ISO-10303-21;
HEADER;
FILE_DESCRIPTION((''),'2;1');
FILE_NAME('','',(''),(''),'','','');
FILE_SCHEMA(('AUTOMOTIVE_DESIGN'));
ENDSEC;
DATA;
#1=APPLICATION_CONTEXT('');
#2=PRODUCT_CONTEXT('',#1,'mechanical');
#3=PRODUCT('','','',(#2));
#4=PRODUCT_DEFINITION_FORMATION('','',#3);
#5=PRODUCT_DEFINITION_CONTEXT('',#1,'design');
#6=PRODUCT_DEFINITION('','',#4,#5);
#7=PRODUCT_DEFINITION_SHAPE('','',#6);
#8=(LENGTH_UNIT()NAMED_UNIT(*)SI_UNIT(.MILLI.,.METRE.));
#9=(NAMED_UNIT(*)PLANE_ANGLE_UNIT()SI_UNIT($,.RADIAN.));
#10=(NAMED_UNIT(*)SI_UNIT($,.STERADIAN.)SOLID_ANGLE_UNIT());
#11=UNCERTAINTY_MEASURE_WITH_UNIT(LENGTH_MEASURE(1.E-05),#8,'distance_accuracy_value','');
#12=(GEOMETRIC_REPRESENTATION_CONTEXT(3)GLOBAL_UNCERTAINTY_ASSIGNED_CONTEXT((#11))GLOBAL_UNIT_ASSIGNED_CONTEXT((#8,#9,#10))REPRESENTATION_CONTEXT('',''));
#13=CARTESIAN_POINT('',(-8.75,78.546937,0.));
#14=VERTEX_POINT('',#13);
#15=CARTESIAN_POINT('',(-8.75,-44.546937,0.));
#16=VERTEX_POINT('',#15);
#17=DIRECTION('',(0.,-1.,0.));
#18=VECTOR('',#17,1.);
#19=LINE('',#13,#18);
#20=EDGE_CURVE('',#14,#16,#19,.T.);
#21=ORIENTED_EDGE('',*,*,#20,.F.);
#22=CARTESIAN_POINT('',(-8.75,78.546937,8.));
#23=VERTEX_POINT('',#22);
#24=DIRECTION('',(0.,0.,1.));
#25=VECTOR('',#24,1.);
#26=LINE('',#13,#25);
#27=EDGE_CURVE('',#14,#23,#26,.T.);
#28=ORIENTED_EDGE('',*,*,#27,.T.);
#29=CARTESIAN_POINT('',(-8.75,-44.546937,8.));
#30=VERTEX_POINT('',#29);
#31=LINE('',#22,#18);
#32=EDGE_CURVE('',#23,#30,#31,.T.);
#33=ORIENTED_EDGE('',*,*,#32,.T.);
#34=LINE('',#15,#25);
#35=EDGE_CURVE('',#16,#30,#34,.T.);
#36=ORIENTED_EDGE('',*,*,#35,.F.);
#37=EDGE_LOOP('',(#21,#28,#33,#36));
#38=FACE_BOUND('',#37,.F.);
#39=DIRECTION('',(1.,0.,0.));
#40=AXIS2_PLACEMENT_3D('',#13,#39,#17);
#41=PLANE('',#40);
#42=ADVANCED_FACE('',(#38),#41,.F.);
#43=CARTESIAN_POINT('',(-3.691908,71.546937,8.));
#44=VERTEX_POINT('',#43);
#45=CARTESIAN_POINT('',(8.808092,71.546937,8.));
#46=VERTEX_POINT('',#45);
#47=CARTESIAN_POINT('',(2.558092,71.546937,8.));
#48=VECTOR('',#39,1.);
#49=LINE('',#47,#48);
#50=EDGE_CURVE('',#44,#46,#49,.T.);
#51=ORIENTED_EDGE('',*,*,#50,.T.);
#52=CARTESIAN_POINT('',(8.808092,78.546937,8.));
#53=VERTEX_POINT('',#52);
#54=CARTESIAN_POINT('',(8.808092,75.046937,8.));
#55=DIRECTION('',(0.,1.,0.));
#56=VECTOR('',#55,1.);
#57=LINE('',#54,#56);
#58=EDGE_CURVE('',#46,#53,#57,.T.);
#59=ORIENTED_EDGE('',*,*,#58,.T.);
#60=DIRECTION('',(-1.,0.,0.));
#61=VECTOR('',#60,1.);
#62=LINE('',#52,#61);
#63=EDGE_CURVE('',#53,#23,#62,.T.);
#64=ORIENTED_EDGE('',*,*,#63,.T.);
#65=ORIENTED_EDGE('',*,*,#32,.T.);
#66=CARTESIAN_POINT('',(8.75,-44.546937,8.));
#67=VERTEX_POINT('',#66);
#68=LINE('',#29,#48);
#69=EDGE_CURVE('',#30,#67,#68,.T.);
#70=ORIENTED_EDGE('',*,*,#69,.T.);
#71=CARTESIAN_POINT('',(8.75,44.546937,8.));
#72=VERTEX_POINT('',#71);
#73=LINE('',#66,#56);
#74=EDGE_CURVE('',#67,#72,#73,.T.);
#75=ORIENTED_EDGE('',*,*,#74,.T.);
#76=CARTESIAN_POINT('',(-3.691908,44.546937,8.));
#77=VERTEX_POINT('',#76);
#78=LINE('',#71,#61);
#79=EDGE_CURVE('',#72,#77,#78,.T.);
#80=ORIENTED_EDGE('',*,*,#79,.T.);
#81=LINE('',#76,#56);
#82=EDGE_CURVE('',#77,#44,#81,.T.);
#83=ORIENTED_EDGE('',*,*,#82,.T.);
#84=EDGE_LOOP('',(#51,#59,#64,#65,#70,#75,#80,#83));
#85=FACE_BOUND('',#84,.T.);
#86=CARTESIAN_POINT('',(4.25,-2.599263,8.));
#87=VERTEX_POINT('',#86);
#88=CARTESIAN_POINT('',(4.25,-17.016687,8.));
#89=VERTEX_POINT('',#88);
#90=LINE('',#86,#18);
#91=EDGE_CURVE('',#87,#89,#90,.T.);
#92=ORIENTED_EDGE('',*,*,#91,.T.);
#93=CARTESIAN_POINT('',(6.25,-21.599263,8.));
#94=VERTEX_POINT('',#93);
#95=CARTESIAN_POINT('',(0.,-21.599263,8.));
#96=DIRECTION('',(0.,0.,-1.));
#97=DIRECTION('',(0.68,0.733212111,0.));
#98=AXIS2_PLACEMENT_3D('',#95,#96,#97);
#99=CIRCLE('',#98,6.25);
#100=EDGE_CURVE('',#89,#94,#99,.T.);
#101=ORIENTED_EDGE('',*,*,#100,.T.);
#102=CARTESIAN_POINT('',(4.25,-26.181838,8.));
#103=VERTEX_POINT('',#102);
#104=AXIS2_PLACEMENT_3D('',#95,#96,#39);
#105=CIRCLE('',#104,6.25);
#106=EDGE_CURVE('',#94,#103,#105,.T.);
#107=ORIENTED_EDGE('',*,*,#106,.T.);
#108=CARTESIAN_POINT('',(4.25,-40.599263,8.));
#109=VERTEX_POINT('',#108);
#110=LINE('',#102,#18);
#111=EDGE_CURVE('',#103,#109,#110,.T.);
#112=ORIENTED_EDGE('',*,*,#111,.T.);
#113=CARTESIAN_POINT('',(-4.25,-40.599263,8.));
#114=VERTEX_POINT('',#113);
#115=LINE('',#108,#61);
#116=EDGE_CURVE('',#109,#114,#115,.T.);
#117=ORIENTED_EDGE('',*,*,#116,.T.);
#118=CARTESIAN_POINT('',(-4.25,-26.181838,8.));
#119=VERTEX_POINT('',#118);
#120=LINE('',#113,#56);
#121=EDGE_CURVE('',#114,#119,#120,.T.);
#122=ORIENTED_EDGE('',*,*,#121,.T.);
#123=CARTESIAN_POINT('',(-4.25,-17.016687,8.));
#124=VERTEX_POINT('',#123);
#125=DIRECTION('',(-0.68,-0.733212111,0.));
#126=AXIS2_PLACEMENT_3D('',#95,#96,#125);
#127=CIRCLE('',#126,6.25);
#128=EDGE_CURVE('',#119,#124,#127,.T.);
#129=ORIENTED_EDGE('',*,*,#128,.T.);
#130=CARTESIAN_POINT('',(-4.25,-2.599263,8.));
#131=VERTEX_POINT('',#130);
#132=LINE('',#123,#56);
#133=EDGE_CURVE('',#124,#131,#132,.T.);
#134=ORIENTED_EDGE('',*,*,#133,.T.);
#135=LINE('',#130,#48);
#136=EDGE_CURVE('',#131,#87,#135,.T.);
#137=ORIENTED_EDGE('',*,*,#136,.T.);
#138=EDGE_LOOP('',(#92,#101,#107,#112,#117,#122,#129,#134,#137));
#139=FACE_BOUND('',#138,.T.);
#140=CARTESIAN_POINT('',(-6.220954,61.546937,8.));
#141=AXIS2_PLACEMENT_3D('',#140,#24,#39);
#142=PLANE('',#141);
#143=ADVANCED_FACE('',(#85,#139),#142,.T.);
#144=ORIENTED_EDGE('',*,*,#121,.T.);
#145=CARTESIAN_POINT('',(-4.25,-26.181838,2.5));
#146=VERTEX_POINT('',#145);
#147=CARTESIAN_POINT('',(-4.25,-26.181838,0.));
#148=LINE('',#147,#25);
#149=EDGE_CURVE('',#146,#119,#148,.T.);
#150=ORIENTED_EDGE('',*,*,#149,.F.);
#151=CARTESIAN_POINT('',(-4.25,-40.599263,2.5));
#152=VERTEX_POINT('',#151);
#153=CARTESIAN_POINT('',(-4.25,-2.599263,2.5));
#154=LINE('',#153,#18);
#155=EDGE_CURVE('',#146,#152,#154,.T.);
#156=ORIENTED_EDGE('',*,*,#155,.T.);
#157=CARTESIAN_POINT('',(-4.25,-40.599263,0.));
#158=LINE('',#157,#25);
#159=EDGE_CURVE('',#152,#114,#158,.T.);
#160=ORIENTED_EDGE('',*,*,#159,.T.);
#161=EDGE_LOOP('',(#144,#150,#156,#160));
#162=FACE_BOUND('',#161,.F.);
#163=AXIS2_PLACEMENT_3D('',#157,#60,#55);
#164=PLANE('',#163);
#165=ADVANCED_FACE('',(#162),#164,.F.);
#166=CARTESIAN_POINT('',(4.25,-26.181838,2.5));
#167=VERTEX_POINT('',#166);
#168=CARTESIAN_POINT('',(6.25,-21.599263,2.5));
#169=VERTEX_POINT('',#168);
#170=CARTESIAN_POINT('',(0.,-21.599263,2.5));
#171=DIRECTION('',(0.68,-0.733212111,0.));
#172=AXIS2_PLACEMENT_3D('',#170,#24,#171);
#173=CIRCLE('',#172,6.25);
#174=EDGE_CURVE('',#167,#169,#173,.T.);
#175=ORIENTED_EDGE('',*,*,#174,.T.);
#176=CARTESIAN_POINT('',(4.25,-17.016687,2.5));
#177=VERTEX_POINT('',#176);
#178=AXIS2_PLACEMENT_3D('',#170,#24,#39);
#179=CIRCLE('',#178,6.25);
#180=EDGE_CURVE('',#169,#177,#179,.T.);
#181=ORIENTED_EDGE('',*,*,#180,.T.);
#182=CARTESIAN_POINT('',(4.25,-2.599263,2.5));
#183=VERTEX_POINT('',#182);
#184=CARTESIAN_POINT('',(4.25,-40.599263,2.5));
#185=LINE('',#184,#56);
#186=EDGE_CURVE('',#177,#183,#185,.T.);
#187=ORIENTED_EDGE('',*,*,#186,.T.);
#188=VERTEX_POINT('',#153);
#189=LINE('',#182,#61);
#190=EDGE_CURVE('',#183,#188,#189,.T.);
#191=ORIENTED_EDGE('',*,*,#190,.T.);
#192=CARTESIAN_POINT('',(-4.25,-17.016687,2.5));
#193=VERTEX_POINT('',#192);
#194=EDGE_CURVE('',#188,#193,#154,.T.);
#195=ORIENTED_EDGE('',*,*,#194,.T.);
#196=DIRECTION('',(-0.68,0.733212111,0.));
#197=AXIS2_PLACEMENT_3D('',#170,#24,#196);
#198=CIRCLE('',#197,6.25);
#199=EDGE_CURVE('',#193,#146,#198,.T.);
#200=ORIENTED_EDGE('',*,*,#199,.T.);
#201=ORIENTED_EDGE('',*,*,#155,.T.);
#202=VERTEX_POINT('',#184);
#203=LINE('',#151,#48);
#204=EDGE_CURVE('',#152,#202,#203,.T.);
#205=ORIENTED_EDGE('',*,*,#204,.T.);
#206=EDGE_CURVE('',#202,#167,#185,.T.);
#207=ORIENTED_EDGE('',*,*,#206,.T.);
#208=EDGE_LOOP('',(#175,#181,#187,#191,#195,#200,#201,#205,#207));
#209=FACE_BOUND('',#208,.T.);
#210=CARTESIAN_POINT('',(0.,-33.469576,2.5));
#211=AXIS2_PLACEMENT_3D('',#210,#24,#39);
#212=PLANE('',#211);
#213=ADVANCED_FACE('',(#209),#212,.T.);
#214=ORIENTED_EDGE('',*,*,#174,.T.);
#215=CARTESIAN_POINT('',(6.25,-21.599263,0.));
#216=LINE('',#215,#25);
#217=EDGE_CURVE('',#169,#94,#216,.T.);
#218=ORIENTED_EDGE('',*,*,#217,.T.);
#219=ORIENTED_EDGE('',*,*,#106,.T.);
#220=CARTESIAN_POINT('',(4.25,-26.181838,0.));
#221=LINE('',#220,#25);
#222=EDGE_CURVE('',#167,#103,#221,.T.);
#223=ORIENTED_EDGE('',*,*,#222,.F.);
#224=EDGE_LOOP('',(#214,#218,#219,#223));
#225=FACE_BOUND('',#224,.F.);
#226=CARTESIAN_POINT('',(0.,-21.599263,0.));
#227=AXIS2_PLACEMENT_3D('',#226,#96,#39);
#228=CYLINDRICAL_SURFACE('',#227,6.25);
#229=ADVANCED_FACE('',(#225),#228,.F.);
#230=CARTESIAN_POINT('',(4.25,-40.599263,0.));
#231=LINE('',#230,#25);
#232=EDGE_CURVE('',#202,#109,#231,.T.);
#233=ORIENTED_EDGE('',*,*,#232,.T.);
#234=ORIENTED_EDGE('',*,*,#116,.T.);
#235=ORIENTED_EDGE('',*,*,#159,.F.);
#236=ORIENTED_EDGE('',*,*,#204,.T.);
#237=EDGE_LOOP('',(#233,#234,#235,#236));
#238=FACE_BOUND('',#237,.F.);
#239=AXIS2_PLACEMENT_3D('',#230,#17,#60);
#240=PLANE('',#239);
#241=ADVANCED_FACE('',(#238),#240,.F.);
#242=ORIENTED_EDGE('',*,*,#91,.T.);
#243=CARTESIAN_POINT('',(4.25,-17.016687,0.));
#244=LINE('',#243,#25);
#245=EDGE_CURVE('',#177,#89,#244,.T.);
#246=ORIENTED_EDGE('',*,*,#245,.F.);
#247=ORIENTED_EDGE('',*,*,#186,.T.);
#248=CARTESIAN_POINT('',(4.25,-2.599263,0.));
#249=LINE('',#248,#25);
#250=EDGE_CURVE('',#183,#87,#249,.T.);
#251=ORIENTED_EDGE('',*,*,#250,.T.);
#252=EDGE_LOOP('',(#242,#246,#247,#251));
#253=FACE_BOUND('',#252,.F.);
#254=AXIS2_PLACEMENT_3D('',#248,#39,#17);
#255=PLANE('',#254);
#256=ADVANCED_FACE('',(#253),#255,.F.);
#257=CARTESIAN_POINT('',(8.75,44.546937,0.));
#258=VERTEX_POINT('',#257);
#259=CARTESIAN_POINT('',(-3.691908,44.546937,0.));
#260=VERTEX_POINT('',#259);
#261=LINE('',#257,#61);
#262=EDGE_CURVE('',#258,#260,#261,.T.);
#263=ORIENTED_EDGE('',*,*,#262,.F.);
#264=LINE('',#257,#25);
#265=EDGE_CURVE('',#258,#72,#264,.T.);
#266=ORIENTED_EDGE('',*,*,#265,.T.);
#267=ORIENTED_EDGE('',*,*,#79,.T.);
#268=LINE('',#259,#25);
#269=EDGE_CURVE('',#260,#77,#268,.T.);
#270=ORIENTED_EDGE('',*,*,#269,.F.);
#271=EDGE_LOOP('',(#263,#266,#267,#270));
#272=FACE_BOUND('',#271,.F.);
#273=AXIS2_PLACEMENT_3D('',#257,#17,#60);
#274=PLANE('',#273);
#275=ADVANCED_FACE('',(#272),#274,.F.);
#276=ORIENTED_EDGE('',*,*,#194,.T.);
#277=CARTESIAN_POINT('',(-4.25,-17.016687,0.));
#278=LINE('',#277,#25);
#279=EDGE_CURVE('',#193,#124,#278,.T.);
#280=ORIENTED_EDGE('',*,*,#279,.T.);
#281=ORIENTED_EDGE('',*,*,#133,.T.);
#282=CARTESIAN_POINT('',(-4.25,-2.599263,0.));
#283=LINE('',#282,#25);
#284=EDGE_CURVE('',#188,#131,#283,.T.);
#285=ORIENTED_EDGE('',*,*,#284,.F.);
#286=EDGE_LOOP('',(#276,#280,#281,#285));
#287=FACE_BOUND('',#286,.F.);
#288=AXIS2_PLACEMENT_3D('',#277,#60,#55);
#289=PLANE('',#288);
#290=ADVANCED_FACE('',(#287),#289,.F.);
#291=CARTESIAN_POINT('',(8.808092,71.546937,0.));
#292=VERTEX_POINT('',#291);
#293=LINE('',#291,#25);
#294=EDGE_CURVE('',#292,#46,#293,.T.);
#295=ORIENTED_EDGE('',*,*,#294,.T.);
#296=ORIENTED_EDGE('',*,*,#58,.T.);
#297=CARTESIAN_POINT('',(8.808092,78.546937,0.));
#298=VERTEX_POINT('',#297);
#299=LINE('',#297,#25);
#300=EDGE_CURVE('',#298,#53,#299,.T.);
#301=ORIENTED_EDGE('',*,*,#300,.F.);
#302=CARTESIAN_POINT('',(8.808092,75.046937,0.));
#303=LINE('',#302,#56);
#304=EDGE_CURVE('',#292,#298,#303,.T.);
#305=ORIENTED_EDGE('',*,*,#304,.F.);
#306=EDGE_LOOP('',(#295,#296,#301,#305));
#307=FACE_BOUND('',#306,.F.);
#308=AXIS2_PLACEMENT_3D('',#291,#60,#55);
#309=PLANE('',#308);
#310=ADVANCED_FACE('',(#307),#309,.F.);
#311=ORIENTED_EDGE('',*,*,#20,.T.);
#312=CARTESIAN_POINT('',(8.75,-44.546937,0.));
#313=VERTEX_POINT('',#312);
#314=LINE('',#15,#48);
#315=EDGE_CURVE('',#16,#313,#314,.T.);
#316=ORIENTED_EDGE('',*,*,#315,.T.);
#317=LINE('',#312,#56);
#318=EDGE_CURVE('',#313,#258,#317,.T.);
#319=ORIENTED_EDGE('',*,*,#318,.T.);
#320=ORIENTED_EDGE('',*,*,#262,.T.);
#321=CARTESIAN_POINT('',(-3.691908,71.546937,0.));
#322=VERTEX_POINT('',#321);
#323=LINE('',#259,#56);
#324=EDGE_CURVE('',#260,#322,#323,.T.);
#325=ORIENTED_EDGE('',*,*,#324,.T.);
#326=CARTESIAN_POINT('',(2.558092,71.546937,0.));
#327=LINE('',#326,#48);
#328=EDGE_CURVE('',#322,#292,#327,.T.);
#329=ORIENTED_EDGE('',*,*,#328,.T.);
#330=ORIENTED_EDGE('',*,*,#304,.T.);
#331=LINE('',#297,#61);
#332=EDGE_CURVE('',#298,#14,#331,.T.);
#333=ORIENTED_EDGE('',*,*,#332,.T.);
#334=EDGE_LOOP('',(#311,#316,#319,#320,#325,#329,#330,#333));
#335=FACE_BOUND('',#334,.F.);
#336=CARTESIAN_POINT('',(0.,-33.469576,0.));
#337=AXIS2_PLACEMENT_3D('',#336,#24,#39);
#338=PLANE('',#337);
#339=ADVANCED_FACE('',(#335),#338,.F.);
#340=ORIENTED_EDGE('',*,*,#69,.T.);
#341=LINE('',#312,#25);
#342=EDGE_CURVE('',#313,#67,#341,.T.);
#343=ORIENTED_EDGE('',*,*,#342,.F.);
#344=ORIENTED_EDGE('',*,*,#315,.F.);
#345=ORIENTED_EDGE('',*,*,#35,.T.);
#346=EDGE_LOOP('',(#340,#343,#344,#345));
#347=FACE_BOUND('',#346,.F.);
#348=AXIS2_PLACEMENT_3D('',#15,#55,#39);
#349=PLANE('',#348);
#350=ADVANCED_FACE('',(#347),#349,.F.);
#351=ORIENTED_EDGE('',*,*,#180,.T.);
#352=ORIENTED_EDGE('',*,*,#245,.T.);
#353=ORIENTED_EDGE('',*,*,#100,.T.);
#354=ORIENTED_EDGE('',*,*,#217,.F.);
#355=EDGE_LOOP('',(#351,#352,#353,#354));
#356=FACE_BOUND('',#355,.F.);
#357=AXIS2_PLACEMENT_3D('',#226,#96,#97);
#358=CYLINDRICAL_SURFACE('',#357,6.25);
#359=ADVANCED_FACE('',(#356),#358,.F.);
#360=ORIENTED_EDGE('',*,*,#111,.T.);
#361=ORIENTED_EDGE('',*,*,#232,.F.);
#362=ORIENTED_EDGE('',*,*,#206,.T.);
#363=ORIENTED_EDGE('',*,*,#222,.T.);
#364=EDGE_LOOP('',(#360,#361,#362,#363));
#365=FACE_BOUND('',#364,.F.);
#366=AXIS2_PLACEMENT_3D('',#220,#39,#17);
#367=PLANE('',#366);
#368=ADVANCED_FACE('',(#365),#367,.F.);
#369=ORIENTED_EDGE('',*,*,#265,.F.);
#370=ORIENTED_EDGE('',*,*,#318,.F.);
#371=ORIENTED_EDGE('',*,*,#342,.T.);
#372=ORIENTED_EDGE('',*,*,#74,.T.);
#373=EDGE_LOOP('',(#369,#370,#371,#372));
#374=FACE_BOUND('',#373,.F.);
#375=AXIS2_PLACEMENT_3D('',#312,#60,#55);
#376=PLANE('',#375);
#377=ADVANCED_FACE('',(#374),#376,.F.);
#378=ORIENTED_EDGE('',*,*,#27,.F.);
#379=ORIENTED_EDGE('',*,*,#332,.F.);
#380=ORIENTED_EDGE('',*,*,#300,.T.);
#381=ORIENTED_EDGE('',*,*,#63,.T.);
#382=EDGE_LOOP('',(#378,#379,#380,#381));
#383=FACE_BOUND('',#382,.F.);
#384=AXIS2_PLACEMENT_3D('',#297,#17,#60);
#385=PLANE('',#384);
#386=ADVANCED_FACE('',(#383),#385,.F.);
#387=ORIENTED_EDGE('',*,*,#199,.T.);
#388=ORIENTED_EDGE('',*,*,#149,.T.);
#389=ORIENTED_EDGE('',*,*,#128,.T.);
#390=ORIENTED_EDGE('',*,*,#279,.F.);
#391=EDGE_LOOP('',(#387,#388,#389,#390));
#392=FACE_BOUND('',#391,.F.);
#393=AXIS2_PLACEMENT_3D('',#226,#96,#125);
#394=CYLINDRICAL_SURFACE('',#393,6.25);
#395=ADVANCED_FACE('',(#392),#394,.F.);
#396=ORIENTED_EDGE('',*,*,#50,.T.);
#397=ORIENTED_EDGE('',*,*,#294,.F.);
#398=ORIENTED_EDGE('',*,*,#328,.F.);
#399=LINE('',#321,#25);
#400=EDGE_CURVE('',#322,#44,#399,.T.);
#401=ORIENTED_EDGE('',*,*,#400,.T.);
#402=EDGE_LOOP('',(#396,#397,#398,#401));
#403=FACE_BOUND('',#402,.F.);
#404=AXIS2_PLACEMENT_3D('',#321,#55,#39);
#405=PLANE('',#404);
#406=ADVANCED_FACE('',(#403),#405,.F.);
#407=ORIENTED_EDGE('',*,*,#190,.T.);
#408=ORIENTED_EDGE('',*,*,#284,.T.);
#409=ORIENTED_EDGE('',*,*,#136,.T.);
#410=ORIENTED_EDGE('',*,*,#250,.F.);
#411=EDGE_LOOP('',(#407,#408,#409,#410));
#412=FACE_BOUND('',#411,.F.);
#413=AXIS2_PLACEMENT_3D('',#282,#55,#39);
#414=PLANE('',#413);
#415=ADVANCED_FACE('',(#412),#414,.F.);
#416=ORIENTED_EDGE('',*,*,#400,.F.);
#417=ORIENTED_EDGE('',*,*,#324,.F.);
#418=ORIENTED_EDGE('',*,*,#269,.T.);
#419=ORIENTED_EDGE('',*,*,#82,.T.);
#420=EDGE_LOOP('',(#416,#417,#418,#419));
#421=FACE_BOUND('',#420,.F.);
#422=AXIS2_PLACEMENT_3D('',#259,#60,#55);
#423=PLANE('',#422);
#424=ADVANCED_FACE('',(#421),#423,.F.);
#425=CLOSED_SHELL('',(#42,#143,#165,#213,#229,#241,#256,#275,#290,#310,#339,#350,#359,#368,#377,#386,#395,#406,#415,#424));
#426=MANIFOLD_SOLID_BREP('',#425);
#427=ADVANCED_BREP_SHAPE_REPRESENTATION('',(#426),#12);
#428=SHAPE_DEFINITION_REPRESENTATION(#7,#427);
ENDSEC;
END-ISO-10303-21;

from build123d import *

# Parameters (mm, degrees)
F0_W     = 12.5
F0_H     = 7
F1_DEPTH = 8
F2_DEPTH = 2.5


# Not quite as in the source:
# - a feature names something its author has since deleted; it is built from what else it names


with BuildPart() as f1:
    # F0 (on Top) → F1 (new body)
    with BuildSketch(Plane.XY):
        Polygon((-3.75, 44.5469365077), (-3.6919084378, 44.5469365077), (-3.6919084378, 71.5469365077), (-3.6919084378, 78.5469365077), (-8.75, 78.5469365077), (-8.75, 44.5469365077), align=None)
        Polygon((8.75, -44.5469365077), (8.75, 44.5469365077), (3.75, 44.5469365077), (-3.6919084378, 44.5469365077), (-3.75, 44.5469365077), (-8.75, 44.5469365077), (-8.75, -44.5469365077), align=None)
        with BuildLine():
            Line((-4.25, -2.5992627119), (4.25, -2.5992627119))
            Line((4.25, -2.5992627119), (4.25, -17.016687017))
            ThreePointArc((4.25, -17.016687017), (5.7282196187, -19.0992627119), (6.25, -21.5992627119))
            ThreePointArc((6.25, -21.5992627119), (5.7282196187, -24.0992627119), (4.25, -26.1818384069))
            Line((4.25, -26.1818384069), (4.25, -40.5992627119))
            Line((4.25, -40.5992627119), (-4.25, -40.5992627119))
            Line((-4.25, -40.5992627119), (-4.25, -26.1818384069))
            ThreePointArc((-4.25, -26.1818384069), (-6.25, -21.5992627119), (-4.25, -17.016687017))
            Line((-4.25, -17.016687017), (-4.25, -2.5992627119))
        make_face(mode=Mode.SUBTRACT)
        with Locations((2.5580915622, 75.0469365077)):
            Rectangle(F0_W, F0_H)
    extrude(amount=F1_DEPTH)

    # F0 (on Top) → F2 (join)
    with BuildSketch(Plane.XY):
        with BuildLine():
            Line((4.25, -40.5992627119), (4.25, -26.1818384069))
            ThreePointArc((4.25, -26.1818384069), (0, -27.8492627119), (-4.25, -26.1818384069))
            Line((-4.25, -26.1818384069), (-4.25, -40.5992627119))
            Line((-4.25, -40.5992627119), (4.25, -40.5992627119))
        make_face()
        with BuildLine():
            Line((4.25, -26.1818384069), (4.25, -17.016687017))
            ThreePointArc((4.25, -17.016687017), (0, -15.3492627119), (-4.25, -17.016687017))
            Line((-4.25, -17.016687017), (-4.25, -26.1818384069))
            ThreePointArc((-4.25, -26.1818384069), (0, -27.8492627119), (4.25, -26.1818384069))
        make_face()
        with BuildLine():
            Line((4.25, -17.016687017), (4.25, -2.5992627119))
            Line((4.25, -2.5992627119), (-4.25, -2.5992627119))
            Line((-4.25, -2.5992627119), (-4.25, -17.016687017))
            ThreePointArc((-4.25, -17.016687017), (0, -15.3492627119), (4.25, -17.016687017))
        make_face()
        with BuildLine():
            ThreePointArc((6.25, -21.5992627119), (5.7282196187, -19.0992627119), (4.25, -17.016687017))
            Line((4.25, -17.016687017), (4.25, -26.1818384069))
            ThreePointArc((4.25, -26.1818384069), (5.7282196187, -24.0992627119), (6.25, -21.5992627119))
        make_face()
        with BuildLine():
            Line((-4.25, -26.1818384069), (-4.25, -17.016687017))
            ThreePointArc((-4.25, -17.016687017), (-6.25, -21.5992627119), (-4.25, -26.1818384069))
        make_face()
    extrude(amount=F2_DEPTH)


solid = f1.part
